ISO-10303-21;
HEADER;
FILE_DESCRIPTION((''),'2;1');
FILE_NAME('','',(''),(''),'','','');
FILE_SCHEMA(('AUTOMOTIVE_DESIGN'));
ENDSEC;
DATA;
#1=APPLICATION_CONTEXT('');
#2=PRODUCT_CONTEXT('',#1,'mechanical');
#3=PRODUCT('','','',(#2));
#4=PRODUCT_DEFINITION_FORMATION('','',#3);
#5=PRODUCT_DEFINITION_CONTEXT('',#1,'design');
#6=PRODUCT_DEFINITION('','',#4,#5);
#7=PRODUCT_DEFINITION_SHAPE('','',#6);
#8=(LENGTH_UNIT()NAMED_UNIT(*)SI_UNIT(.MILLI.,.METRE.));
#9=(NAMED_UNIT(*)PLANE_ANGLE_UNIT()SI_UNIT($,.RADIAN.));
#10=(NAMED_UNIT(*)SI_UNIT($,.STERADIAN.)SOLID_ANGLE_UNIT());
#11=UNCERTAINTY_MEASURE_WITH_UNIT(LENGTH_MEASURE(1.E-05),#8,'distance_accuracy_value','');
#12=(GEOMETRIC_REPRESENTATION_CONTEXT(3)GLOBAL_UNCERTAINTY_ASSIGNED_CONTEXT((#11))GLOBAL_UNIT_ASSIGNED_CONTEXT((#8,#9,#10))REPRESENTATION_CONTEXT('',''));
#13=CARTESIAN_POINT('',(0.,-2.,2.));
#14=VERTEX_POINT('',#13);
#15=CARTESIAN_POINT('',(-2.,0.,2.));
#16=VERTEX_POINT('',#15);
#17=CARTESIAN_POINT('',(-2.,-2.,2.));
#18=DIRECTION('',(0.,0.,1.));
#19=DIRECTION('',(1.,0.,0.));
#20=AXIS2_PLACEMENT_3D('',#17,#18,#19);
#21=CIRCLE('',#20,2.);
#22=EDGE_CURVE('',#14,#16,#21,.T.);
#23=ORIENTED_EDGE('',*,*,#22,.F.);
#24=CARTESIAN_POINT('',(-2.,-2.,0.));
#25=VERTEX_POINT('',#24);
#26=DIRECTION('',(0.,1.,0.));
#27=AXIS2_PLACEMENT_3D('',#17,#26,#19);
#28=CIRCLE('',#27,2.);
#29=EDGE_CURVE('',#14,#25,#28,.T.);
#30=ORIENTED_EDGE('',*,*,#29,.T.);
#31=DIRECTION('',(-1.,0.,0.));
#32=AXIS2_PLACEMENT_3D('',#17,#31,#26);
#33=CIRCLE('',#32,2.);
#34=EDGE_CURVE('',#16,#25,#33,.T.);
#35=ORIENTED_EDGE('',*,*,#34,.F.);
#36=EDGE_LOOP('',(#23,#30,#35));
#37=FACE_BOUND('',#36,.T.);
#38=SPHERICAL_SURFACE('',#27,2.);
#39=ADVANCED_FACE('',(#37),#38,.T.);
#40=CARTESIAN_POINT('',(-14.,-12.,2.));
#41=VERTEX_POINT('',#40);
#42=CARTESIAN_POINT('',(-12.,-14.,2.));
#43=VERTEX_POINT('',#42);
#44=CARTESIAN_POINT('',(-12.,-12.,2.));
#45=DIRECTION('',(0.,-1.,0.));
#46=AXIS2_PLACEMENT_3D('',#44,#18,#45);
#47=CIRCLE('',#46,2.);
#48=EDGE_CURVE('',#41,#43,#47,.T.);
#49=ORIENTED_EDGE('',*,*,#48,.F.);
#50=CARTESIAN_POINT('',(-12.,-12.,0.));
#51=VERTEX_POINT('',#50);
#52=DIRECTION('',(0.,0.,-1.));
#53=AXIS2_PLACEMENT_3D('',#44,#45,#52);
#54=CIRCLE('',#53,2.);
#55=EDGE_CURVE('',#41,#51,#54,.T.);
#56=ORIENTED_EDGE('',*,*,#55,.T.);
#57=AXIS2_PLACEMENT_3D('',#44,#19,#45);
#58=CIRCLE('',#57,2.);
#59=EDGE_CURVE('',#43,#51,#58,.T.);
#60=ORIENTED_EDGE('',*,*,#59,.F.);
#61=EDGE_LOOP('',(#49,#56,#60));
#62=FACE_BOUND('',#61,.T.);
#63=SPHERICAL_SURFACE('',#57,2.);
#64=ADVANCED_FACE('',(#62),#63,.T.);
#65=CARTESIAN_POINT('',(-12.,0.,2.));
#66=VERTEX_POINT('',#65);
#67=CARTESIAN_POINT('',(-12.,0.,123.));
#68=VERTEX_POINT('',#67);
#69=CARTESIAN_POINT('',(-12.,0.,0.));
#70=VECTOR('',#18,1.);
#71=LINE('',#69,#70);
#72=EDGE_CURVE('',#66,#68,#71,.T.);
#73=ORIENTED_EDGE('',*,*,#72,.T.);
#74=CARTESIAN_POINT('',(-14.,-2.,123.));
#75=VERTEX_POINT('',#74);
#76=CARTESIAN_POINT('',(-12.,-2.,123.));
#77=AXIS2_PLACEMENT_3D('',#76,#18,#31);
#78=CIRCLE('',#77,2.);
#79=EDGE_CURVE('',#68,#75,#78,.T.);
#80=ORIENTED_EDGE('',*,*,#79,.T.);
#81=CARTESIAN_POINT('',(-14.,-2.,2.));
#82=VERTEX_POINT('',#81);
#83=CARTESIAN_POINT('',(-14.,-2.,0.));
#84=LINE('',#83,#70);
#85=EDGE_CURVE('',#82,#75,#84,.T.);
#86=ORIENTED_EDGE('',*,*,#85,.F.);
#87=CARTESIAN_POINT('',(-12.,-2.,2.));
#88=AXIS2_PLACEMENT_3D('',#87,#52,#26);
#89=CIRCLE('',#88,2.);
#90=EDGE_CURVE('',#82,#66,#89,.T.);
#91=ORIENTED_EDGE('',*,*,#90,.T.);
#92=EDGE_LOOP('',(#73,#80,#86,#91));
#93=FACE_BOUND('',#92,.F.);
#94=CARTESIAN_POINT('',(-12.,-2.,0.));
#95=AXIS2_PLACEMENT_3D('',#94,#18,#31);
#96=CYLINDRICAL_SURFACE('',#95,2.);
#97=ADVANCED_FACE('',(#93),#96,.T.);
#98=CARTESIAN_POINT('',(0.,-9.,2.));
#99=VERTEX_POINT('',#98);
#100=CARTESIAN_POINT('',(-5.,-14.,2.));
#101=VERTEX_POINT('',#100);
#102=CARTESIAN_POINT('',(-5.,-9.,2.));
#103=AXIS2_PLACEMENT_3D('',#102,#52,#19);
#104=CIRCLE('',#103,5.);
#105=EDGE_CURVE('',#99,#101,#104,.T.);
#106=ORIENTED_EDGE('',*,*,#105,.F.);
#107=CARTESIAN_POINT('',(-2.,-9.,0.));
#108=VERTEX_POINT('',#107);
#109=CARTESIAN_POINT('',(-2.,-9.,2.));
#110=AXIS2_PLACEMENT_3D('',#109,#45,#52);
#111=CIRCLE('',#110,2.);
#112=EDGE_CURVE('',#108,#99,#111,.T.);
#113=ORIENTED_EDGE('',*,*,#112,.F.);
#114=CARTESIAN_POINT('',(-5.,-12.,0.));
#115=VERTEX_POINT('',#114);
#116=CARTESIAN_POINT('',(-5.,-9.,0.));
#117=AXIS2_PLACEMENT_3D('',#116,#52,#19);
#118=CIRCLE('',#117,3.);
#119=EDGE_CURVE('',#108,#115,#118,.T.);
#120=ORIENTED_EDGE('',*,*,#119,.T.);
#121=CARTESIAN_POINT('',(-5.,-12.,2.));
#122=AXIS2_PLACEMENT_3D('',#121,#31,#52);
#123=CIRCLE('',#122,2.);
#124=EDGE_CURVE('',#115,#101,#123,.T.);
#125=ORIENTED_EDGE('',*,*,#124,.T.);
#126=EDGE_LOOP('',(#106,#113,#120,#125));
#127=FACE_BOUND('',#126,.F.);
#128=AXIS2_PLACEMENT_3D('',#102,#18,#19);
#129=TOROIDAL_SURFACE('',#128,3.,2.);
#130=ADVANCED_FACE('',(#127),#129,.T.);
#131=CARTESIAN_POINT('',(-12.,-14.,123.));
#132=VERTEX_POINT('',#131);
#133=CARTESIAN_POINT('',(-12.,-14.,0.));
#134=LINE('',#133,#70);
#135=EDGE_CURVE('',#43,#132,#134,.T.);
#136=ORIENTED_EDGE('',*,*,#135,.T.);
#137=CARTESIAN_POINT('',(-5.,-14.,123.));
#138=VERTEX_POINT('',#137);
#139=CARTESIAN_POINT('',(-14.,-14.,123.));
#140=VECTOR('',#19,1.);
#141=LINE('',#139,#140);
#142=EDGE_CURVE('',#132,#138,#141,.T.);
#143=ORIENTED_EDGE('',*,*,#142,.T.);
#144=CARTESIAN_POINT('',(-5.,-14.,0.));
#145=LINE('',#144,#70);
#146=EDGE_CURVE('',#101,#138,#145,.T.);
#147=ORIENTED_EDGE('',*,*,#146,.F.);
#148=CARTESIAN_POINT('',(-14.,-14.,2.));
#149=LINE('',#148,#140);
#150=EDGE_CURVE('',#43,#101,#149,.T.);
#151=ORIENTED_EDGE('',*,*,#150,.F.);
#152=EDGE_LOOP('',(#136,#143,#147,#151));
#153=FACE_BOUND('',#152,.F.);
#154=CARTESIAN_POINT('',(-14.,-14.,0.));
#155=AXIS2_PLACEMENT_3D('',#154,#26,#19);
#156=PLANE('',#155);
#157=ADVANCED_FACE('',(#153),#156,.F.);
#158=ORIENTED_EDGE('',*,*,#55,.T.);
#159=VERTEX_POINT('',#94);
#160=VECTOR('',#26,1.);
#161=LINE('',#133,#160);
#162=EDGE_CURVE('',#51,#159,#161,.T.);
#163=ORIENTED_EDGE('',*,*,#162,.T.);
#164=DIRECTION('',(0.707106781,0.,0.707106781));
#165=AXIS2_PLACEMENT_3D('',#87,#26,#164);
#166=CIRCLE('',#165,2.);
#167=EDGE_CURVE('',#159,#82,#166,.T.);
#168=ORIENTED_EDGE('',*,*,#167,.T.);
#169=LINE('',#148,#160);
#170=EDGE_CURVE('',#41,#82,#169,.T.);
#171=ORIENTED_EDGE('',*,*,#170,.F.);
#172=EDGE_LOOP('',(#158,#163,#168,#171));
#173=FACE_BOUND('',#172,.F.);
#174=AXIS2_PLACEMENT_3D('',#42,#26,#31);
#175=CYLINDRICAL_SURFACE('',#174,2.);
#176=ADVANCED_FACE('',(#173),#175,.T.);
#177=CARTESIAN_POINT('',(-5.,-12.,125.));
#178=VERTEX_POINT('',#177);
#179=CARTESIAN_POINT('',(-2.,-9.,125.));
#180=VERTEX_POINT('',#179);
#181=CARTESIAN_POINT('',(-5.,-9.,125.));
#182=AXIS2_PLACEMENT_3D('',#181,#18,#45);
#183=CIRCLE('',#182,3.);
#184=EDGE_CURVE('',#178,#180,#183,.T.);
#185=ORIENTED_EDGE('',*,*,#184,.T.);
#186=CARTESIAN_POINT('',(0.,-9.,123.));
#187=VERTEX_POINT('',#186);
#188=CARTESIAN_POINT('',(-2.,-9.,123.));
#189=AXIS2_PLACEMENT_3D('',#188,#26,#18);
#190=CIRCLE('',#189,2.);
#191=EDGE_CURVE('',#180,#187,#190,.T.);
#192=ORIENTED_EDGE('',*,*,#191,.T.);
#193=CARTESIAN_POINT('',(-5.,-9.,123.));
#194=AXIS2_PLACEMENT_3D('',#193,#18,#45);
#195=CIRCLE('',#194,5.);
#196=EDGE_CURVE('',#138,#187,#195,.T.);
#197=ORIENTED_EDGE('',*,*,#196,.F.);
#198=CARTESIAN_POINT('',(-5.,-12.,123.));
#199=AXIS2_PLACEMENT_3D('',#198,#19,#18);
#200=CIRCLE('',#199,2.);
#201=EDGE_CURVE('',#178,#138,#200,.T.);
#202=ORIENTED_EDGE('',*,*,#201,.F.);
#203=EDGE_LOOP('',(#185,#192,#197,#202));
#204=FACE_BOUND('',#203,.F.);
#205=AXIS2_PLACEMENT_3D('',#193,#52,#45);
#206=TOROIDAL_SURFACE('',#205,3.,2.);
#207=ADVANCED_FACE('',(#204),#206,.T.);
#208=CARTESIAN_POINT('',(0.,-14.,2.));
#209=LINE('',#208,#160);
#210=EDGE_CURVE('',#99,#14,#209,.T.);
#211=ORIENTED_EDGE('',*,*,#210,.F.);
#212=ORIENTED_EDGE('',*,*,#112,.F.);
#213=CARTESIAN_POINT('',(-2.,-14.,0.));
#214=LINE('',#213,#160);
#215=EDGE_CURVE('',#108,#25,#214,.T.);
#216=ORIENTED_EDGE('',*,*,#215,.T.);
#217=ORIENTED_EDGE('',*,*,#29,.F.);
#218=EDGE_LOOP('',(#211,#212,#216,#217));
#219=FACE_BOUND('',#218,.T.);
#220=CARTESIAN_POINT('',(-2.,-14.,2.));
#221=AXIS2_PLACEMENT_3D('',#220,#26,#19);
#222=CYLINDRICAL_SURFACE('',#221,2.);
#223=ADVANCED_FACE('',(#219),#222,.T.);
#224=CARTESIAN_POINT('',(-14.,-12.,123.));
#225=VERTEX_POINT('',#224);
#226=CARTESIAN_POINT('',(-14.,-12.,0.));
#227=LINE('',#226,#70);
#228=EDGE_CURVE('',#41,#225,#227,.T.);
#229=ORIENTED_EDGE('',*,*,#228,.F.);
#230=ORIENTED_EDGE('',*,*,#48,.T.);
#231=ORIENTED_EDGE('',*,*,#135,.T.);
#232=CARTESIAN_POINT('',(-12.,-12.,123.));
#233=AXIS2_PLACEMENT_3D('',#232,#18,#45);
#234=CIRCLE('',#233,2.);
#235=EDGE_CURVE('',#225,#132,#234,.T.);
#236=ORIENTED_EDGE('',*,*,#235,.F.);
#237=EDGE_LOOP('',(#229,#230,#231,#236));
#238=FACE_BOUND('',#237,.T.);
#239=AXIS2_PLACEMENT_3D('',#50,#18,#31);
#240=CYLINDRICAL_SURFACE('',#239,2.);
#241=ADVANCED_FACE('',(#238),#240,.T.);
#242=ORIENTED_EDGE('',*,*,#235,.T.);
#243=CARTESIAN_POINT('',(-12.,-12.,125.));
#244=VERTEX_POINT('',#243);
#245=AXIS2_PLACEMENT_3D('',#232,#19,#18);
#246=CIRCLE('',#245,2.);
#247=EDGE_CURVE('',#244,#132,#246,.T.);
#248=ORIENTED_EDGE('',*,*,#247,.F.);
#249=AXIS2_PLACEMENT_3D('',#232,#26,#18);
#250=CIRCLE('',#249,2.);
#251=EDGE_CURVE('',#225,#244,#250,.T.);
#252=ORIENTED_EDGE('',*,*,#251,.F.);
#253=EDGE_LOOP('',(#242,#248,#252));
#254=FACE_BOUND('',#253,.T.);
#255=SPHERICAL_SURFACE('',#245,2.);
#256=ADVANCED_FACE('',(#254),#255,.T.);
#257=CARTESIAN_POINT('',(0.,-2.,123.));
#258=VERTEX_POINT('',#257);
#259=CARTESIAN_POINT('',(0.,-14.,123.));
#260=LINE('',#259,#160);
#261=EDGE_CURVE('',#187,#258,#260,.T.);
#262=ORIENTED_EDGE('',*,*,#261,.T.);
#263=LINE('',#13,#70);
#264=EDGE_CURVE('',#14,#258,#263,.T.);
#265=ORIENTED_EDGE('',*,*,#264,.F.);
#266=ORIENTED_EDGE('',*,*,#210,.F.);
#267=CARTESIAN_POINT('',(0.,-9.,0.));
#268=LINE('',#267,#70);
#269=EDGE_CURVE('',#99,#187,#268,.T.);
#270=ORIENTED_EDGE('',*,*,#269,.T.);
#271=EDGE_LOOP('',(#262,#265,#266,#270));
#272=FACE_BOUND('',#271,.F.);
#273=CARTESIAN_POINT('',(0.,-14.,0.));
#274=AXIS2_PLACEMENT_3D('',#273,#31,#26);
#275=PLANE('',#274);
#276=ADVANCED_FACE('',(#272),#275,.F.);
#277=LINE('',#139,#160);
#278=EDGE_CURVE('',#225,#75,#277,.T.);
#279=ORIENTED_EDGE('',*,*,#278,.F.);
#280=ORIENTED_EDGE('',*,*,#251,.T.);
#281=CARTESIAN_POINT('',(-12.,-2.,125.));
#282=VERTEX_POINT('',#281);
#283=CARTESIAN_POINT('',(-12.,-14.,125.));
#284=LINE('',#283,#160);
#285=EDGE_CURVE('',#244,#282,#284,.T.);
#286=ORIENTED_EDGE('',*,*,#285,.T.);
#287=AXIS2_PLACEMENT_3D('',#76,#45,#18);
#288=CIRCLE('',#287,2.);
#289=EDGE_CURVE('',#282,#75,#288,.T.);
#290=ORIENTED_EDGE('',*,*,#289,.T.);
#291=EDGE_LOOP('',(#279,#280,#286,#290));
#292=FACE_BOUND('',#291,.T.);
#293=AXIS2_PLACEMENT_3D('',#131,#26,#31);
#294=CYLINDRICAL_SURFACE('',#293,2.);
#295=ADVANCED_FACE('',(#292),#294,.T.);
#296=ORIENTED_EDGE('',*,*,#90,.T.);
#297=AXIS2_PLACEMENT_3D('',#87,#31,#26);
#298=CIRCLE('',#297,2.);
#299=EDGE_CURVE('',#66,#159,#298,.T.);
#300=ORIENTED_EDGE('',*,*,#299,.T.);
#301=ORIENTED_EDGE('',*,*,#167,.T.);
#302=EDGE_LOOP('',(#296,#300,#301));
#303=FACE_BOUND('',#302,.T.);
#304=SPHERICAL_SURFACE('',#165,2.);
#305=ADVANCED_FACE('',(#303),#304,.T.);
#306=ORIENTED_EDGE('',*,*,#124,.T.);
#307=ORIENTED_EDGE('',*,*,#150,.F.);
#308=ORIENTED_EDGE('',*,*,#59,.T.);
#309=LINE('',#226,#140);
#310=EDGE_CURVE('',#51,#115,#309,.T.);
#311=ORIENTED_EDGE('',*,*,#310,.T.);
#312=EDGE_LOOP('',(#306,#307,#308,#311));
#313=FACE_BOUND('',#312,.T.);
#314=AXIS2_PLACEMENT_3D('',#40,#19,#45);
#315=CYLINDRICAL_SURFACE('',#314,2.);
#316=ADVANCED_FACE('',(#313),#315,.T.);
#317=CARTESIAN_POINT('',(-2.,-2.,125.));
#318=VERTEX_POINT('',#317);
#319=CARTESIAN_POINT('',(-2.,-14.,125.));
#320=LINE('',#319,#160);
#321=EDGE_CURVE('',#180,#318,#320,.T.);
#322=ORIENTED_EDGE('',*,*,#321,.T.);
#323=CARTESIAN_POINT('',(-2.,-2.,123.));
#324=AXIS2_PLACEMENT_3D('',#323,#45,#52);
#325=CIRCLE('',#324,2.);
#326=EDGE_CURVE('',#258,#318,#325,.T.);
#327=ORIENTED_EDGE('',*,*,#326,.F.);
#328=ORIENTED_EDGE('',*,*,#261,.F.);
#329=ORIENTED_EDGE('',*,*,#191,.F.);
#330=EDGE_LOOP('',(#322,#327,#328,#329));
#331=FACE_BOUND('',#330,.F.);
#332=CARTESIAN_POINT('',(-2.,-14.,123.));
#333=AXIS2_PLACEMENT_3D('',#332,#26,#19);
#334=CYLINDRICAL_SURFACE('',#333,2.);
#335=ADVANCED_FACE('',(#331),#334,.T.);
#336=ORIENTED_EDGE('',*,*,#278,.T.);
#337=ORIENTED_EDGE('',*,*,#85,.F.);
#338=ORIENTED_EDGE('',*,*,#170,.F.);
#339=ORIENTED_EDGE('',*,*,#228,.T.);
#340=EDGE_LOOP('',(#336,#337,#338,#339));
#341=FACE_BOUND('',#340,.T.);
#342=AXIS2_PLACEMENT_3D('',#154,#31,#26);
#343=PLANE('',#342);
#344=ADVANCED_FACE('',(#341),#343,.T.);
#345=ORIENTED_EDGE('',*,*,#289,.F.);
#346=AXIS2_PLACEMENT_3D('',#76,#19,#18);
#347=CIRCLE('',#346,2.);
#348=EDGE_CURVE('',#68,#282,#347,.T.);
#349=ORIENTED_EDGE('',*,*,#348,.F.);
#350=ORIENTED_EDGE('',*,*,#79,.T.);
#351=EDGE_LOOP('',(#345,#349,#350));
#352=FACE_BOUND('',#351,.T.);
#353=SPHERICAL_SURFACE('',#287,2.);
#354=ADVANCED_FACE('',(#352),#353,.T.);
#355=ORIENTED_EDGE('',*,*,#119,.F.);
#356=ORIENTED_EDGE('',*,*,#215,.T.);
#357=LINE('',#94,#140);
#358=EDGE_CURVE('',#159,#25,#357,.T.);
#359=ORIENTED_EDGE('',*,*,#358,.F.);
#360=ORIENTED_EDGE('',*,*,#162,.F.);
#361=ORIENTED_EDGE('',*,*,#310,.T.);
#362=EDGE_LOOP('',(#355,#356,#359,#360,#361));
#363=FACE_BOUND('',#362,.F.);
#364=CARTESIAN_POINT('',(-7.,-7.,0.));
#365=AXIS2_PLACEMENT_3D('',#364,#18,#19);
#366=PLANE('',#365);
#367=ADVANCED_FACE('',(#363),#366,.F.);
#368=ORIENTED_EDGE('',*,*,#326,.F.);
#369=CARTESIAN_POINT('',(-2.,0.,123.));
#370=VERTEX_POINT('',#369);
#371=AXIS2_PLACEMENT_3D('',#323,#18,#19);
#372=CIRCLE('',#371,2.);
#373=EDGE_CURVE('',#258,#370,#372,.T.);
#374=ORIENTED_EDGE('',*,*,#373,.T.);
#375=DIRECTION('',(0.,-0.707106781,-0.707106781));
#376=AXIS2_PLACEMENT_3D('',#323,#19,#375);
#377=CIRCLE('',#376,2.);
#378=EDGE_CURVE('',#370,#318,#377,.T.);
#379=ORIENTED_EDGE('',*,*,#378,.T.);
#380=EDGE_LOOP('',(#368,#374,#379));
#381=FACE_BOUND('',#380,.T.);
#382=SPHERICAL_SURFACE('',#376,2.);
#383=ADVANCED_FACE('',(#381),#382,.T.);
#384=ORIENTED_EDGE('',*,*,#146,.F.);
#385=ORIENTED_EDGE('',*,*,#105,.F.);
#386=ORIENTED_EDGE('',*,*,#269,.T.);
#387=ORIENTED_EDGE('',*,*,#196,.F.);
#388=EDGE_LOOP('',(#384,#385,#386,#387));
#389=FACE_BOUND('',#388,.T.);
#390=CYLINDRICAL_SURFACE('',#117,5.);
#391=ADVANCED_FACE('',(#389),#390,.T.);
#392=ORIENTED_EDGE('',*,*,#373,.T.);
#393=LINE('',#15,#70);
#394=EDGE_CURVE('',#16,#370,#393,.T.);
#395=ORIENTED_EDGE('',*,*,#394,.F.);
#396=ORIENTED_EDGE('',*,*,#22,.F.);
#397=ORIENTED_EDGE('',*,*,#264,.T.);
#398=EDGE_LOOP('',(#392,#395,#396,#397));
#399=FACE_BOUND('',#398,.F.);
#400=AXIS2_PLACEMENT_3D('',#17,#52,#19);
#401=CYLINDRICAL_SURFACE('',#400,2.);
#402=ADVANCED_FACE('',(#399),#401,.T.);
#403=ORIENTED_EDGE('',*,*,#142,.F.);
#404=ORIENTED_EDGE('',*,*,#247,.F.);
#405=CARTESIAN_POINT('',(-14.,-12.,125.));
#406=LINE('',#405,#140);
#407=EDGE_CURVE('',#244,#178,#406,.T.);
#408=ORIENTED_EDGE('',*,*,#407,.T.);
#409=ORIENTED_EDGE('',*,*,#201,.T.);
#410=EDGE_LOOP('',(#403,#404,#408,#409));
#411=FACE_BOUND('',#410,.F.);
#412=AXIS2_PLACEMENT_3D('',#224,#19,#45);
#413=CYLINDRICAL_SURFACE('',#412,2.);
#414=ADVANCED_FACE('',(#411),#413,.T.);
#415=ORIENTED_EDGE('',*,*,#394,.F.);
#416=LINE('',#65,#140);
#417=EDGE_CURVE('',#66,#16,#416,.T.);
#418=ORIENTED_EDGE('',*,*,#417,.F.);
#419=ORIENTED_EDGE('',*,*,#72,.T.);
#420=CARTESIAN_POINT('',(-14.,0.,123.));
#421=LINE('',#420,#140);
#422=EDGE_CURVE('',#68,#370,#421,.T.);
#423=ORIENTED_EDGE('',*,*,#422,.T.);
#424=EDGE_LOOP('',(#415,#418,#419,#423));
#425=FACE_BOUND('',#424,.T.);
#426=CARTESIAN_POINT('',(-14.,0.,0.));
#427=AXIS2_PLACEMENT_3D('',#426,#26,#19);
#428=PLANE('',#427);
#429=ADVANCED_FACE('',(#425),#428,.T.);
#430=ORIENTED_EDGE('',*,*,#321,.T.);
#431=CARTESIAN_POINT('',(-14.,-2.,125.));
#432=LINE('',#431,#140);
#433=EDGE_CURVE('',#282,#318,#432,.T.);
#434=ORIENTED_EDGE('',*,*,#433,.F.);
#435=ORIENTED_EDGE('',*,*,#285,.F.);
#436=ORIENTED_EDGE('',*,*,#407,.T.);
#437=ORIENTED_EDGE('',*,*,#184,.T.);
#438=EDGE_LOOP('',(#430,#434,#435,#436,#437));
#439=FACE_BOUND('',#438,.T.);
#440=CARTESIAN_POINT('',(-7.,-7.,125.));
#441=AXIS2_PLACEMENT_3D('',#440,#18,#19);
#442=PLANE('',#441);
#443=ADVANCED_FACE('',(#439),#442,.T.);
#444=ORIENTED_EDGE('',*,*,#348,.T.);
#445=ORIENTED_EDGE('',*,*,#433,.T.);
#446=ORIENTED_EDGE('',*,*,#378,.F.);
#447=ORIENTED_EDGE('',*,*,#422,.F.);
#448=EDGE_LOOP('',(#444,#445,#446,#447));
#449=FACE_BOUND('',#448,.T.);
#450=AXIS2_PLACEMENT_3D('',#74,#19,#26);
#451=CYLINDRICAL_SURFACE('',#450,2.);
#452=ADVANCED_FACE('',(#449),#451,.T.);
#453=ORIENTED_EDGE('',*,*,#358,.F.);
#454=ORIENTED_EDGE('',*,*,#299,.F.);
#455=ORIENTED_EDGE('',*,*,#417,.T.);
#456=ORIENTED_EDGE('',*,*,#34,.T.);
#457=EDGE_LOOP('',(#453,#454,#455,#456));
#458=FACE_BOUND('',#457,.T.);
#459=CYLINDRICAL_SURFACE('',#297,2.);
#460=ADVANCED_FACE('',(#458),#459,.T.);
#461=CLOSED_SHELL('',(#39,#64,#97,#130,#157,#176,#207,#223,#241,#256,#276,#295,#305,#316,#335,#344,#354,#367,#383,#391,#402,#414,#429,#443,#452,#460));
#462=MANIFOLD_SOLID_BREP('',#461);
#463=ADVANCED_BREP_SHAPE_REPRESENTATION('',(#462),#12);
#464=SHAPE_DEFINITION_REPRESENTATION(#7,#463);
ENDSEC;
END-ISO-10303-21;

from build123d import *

# Parameters (mm, degrees)
F0_W         = 14
F0_H         = 14
F1_DEPTH     = 125
F2_R         = 2
F3_T1_DEPTH  = 125
F3_T4_ANGLE  = 90
F3_T6_ANGLE  = 90
F4_T1_DEPTH  = 121
F4_T3_DEPTH  = 10
F4_S7_W      = 2
F4_S7_H      = 2
F4_T8_DEPTH  = 2
F4_S13_W     = 2
F4_S13_H     = 2
F4_T14_DEPTH = 2
F4_T18_ANGLE = 90


# Not quite as in the source:
# - a fillet or chamfer that OpenCascade refuses, or shapes differently, is made with other operations: its cross-section is extruded or revolved along the edge and cut away or added


with BuildPart() as f1:
    # F0 (on Top) → F1 (new body)
    with BuildSketch(Plane.XY):
        with Locations((-7, -7)):
            Rectangle(F0_W, F0_H)
    extrude(amount=F1_DEPTH)

    # F2
    f2_edges = [f1.edges().sort_by_distance(p)[0] for p in [
        (-7, -14, 125),
        (0, -7, 125),
        (-7, -14, 0),
        (0, -7, 0),
        (-14, -7, 125),
        (-7, 0, 125),
        (-14, 0, 62.5),
        (-14, -14, 62.5),
        (-14, -7, 0),
    ]]
    fillet(f2_edges, radius=F2_R)

    # F3: fillet of radius 5 on 1 edges, made by hand

    # F3_s2 → F3_t1 (cut)
    with BuildSketch(Plane.XY):
        with BuildLine():
            ThreePointArc((0, -9), (-1.4644660941, -12.5355339059), (-5, -14))
            Line((-5, -14), (0, -14))
            Line((0, -14), (0, -9))
        make_face()
    extrude(amount=F3_T1_DEPTH, mode=Mode.SUBTRACT)

    # F3_s3 → F3_t4 (revolve, cut)
    with BuildSketch(Plane.XZ.offset(9)):
        with BuildLine():
            ThreePointArc((-2, 0), (-0.5857864376, 0.5857864376), (0, 2))
            Line((0, 2), (0, 0))
            Line((0, 0), (-2, 0))
        make_face()
    revolve(axis=Axis((-5, -9, 0), (0, 0, -1)), revolution_arc=F3_T4_ANGLE, mode=Mode.SUBTRACT)

    # F3_s5 → F3_t6 (revolve, cut)
    with BuildSketch(Plane.YZ.offset(-5)):
        with BuildLine():
            ThreePointArc((-12, 125), (-13.4142135624, 124.4142135624), (-14, 123))
            Line((-14, 123), (-14, 125))
            Line((-14, 125), (-12, 125))
        make_face()
    revolve(axis=Axis((-5, -9, 125), (0, 0, 1)), revolution_arc=F3_T6_ANGLE, mode=Mode.SUBTRACT)

    # F4: fillet of radius 2 on 2 edges, made by hand

    # F4_s2 → F4_t1 (cut)
    with BuildSketch(Plane.XY.offset(2)):
        with BuildLine():
            ThreePointArc((0, -2), (-0.5857864376, -0.5857864376), (-2, 0))
            Line((-2, 0), (0, 0))
            Line((0, 0), (0, -2))
        make_face()
    extrude(amount=F4_T1_DEPTH, mode=Mode.SUBTRACT)

    # F4_s4 → F4_t3 (cut)
    with BuildSketch(Plane.YZ.offset(-12)):
        with BuildLine():
            ThreePointArc((0, 2), (-0.5857864376, 0.5857864376), (-2, 0))
            Line((-2, 0), (0, 0))
            Line((0, 0), (0, 2))
        make_face()
    extrude(amount=F4_T3_DEPTH, mode=Mode.SUBTRACT)


with BuildPart() as f4_tool6:
    # F4_s7 → F4_t8 (new body)
    with BuildSketch(Plane.YZ.offset(-2)):
        with Locations((-1, 124)):
            Rectangle(F4_S7_W, F4_S7_H)
    extrude(amount=F4_T8_DEPTH)

    # F4_s9 → F4_t10 (revolve, cut)
    with BuildSketch(Plane(origin=(-2, -2, 123), x_dir=(0, -0.7071067812, -0.7071067812), z_dir=(0, -0.7071067812, 0.7071067812))):
        with BuildLine():
            ThreePointArc((0, -2), (2, 0), (0, 2))
            Line((0, 2), (0, -2))
        make_face()
    revolve(axis=Axis((-2, -2, 123), (1, 0, 0)), mode=Mode.SUBTRACT)


with BuildPart() as f1_1:
    add(f1.part)

    # F4_t5: cut F4_tool6
    add(f4_tool6.part, mode=Mode.SUBTRACT)


with BuildPart() as f4_tool12:
    # F4_s13 → F4_t14 (new body)
    with BuildSketch(Plane.XZ.offset(2)):
        with Locations((-13, 1)):
            Rectangle(F4_S13_W, F4_S13_H)
    extrude(amount=-F4_T14_DEPTH)

    # F4_s15 → F4_t16 (revolve, cut)
    with BuildSketch(Plane(origin=(-12, -2, 2), x_dir=(0.7071067812, 0, 0.7071067812), z_dir=(-0.7071067812, 0, 0.7071067812))):
        with BuildLine():
            ThreePointArc((0, -2), (2, 0), (0, 2))
            Line((0, 2), (0, -2))
        make_face()
    revolve(axis=Axis((-12, -2, 2), (0, 1, 0)), mode=Mode.SUBTRACT)


with BuildPart() as f1_2:
    add(f1_1.part)

    # F4_t11: cut F4_tool12
    add(f4_tool12.part, mode=Mode.SUBTRACT)

    # F4_s17 → F4_t18 (revolve, cut)
    with BuildSketch(Plane.XY.offset(2)):
        with BuildLine():
            ThreePointArc((0, -2), (-0.5857864376, -0.5857864376), (-2, 0))
            Line((-2, 0), (0, 0))
            Line((0, 0), (0, -2))
        make_face()
    revolve(axis=Axis((-2, 0, 2), (0, 1, 0)), revolution_arc=F4_T18_ANGLE, mode=Mode.SUBTRACT)


solid = f1_2.part
